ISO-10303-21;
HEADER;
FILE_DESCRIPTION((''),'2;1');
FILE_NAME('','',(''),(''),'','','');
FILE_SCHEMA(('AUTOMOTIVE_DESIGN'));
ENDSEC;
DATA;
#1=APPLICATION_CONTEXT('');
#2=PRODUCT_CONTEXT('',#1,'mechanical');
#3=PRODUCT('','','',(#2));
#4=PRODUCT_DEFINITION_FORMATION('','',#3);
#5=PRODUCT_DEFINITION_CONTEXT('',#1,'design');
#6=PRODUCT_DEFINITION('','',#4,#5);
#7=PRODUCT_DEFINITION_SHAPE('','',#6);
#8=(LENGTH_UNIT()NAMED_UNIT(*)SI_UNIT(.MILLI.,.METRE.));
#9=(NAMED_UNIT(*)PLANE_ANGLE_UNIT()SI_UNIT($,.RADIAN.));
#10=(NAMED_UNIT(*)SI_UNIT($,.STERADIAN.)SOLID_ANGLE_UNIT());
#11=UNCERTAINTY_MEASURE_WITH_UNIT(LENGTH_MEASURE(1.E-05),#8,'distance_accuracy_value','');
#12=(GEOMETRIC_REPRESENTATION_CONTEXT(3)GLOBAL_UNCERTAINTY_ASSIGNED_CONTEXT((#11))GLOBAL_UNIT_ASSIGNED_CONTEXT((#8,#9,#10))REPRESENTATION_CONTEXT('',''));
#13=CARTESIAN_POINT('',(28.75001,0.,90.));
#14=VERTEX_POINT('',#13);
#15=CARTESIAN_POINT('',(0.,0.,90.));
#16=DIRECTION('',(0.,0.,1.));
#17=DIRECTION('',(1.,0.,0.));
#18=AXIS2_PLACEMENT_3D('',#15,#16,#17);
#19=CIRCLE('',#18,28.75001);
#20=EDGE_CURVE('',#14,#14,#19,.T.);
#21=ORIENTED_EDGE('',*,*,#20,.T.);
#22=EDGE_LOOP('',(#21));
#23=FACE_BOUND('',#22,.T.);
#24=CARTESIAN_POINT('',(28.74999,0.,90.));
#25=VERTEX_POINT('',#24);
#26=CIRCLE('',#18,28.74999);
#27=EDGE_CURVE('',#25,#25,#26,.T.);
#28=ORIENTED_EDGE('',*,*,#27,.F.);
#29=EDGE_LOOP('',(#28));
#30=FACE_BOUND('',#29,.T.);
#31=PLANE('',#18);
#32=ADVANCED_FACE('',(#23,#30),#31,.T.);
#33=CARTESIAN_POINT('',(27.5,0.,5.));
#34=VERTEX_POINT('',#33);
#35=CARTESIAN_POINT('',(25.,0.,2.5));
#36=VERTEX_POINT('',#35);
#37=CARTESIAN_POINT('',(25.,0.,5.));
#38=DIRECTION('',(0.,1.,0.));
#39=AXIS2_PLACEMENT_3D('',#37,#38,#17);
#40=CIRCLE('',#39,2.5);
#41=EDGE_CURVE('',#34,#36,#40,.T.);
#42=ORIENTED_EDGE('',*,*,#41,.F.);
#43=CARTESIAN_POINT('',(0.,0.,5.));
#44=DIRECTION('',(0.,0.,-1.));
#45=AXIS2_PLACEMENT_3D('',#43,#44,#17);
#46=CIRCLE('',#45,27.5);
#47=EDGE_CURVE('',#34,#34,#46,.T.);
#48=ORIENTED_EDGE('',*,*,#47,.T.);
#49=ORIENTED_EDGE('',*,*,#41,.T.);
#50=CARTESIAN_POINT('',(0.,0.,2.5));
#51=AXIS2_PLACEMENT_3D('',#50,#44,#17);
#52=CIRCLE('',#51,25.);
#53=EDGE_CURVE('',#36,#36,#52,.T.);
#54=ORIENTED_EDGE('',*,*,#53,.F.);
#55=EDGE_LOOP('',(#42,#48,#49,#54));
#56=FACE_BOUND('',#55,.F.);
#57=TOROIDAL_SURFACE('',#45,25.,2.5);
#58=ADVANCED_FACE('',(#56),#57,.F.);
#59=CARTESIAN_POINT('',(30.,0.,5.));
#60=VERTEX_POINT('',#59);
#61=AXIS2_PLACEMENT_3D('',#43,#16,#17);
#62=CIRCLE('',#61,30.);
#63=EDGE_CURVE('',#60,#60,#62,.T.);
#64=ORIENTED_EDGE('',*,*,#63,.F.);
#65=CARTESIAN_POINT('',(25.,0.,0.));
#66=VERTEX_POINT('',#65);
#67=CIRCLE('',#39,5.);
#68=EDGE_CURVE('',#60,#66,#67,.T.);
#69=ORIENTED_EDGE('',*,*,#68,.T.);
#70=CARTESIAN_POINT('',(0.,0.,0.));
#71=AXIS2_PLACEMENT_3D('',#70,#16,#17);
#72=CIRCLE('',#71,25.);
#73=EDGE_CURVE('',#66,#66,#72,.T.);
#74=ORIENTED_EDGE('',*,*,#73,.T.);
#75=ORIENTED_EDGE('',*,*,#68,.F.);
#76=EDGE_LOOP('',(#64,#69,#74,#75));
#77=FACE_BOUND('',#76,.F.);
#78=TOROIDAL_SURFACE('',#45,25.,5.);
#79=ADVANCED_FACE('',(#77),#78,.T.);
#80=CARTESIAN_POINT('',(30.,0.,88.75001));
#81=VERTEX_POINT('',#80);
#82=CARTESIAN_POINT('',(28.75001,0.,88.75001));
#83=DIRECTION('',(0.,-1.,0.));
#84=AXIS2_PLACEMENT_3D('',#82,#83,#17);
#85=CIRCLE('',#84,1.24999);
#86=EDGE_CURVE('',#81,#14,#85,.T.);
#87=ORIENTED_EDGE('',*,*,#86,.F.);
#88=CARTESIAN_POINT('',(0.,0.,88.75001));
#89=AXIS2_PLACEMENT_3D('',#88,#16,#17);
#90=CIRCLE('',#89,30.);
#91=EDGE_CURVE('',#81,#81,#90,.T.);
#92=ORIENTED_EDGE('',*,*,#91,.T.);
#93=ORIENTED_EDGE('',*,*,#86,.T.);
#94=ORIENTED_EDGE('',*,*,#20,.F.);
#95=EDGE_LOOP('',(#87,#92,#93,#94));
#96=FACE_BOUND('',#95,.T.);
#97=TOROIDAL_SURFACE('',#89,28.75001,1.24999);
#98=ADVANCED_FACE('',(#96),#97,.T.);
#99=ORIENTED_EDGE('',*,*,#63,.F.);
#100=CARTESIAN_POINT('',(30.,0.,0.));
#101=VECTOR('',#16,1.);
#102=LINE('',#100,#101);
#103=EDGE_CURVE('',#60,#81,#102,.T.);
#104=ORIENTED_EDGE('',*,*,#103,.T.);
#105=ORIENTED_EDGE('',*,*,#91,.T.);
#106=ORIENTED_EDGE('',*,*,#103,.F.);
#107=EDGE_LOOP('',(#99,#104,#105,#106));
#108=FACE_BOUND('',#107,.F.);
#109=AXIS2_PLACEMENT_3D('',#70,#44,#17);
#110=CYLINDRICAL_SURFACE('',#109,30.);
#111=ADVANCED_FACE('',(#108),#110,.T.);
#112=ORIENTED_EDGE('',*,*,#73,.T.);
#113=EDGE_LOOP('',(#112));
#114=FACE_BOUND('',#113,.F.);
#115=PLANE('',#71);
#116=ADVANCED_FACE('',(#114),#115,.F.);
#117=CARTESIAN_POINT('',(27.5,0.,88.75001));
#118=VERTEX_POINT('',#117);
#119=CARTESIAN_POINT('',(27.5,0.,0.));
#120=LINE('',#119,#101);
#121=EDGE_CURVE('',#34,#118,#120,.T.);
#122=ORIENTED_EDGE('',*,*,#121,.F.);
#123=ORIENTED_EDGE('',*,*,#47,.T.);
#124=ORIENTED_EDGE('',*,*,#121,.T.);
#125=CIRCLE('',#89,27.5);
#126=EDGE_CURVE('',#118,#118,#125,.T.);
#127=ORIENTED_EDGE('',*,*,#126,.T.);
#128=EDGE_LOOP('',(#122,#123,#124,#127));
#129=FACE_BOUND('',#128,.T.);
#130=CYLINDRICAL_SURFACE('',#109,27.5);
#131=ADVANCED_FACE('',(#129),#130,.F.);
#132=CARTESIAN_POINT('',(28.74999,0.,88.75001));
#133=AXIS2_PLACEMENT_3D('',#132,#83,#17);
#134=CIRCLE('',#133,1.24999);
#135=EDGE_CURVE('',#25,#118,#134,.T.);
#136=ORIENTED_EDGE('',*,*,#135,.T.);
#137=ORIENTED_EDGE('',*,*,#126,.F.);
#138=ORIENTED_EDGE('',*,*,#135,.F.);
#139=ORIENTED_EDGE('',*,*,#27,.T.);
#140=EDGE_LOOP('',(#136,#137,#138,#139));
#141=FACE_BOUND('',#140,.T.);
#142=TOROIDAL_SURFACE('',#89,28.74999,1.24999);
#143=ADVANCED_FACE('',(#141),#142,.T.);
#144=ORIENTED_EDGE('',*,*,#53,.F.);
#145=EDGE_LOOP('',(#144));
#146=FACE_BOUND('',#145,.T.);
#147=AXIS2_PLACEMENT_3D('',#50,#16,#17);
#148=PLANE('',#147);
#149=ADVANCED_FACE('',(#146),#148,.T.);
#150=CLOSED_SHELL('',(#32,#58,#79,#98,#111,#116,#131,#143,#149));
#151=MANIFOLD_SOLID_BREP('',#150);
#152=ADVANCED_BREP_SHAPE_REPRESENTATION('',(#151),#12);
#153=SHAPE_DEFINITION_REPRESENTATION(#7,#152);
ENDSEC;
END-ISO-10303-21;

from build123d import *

# Parameters (mm, degrees)
F0_R     = 30
F1_DEPTH = 90
F2_T     = -2.5
F3_R     = 2.5
F4_R     = 5
F5_R     = 1.24999


# Not quite as in the source:
# - a fillet or chamfer is up to 0.001 mm smaller than in the source, because OpenCascade refuses the exact size


with BuildPart() as f1:
    # F0 (on Top) → F1 (new body)
    with BuildSketch(Plane.XY):
        Circle(F0_R)
    extrude(amount=F1_DEPTH)

    # F2
    f2_openings = [f1.faces().sort_by_distance(p)[0] for p in [
        (0, 0, 90),
    ]]
    offset(amount=F2_T, openings=f2_openings)

    # F3
    f3_edges = [f1.edges().sort_by_distance(p)[0] for p in [
        (-27.5, 0, 2.5),
    ]]
    fillet(f3_edges, radius=F3_R)

    # F4
    f4_edges = [f1.edges().sort_by_distance(p)[0] for p in [
        (-30, 0, 0),
    ]]
    fillet(f4_edges, radius=F4_R)

    # F5 (radius 1.25 in the source; OpenCascade refuses exactly that, so slightly less here)
    f5_edges = [f1.edges().sort_by_distance(p)[0] for p in [
        (-30, 0, 90),
        (-27.5, 0, 90),
    ]]
    fillet(f5_edges, radius=F5_R)


solid = f1.part
